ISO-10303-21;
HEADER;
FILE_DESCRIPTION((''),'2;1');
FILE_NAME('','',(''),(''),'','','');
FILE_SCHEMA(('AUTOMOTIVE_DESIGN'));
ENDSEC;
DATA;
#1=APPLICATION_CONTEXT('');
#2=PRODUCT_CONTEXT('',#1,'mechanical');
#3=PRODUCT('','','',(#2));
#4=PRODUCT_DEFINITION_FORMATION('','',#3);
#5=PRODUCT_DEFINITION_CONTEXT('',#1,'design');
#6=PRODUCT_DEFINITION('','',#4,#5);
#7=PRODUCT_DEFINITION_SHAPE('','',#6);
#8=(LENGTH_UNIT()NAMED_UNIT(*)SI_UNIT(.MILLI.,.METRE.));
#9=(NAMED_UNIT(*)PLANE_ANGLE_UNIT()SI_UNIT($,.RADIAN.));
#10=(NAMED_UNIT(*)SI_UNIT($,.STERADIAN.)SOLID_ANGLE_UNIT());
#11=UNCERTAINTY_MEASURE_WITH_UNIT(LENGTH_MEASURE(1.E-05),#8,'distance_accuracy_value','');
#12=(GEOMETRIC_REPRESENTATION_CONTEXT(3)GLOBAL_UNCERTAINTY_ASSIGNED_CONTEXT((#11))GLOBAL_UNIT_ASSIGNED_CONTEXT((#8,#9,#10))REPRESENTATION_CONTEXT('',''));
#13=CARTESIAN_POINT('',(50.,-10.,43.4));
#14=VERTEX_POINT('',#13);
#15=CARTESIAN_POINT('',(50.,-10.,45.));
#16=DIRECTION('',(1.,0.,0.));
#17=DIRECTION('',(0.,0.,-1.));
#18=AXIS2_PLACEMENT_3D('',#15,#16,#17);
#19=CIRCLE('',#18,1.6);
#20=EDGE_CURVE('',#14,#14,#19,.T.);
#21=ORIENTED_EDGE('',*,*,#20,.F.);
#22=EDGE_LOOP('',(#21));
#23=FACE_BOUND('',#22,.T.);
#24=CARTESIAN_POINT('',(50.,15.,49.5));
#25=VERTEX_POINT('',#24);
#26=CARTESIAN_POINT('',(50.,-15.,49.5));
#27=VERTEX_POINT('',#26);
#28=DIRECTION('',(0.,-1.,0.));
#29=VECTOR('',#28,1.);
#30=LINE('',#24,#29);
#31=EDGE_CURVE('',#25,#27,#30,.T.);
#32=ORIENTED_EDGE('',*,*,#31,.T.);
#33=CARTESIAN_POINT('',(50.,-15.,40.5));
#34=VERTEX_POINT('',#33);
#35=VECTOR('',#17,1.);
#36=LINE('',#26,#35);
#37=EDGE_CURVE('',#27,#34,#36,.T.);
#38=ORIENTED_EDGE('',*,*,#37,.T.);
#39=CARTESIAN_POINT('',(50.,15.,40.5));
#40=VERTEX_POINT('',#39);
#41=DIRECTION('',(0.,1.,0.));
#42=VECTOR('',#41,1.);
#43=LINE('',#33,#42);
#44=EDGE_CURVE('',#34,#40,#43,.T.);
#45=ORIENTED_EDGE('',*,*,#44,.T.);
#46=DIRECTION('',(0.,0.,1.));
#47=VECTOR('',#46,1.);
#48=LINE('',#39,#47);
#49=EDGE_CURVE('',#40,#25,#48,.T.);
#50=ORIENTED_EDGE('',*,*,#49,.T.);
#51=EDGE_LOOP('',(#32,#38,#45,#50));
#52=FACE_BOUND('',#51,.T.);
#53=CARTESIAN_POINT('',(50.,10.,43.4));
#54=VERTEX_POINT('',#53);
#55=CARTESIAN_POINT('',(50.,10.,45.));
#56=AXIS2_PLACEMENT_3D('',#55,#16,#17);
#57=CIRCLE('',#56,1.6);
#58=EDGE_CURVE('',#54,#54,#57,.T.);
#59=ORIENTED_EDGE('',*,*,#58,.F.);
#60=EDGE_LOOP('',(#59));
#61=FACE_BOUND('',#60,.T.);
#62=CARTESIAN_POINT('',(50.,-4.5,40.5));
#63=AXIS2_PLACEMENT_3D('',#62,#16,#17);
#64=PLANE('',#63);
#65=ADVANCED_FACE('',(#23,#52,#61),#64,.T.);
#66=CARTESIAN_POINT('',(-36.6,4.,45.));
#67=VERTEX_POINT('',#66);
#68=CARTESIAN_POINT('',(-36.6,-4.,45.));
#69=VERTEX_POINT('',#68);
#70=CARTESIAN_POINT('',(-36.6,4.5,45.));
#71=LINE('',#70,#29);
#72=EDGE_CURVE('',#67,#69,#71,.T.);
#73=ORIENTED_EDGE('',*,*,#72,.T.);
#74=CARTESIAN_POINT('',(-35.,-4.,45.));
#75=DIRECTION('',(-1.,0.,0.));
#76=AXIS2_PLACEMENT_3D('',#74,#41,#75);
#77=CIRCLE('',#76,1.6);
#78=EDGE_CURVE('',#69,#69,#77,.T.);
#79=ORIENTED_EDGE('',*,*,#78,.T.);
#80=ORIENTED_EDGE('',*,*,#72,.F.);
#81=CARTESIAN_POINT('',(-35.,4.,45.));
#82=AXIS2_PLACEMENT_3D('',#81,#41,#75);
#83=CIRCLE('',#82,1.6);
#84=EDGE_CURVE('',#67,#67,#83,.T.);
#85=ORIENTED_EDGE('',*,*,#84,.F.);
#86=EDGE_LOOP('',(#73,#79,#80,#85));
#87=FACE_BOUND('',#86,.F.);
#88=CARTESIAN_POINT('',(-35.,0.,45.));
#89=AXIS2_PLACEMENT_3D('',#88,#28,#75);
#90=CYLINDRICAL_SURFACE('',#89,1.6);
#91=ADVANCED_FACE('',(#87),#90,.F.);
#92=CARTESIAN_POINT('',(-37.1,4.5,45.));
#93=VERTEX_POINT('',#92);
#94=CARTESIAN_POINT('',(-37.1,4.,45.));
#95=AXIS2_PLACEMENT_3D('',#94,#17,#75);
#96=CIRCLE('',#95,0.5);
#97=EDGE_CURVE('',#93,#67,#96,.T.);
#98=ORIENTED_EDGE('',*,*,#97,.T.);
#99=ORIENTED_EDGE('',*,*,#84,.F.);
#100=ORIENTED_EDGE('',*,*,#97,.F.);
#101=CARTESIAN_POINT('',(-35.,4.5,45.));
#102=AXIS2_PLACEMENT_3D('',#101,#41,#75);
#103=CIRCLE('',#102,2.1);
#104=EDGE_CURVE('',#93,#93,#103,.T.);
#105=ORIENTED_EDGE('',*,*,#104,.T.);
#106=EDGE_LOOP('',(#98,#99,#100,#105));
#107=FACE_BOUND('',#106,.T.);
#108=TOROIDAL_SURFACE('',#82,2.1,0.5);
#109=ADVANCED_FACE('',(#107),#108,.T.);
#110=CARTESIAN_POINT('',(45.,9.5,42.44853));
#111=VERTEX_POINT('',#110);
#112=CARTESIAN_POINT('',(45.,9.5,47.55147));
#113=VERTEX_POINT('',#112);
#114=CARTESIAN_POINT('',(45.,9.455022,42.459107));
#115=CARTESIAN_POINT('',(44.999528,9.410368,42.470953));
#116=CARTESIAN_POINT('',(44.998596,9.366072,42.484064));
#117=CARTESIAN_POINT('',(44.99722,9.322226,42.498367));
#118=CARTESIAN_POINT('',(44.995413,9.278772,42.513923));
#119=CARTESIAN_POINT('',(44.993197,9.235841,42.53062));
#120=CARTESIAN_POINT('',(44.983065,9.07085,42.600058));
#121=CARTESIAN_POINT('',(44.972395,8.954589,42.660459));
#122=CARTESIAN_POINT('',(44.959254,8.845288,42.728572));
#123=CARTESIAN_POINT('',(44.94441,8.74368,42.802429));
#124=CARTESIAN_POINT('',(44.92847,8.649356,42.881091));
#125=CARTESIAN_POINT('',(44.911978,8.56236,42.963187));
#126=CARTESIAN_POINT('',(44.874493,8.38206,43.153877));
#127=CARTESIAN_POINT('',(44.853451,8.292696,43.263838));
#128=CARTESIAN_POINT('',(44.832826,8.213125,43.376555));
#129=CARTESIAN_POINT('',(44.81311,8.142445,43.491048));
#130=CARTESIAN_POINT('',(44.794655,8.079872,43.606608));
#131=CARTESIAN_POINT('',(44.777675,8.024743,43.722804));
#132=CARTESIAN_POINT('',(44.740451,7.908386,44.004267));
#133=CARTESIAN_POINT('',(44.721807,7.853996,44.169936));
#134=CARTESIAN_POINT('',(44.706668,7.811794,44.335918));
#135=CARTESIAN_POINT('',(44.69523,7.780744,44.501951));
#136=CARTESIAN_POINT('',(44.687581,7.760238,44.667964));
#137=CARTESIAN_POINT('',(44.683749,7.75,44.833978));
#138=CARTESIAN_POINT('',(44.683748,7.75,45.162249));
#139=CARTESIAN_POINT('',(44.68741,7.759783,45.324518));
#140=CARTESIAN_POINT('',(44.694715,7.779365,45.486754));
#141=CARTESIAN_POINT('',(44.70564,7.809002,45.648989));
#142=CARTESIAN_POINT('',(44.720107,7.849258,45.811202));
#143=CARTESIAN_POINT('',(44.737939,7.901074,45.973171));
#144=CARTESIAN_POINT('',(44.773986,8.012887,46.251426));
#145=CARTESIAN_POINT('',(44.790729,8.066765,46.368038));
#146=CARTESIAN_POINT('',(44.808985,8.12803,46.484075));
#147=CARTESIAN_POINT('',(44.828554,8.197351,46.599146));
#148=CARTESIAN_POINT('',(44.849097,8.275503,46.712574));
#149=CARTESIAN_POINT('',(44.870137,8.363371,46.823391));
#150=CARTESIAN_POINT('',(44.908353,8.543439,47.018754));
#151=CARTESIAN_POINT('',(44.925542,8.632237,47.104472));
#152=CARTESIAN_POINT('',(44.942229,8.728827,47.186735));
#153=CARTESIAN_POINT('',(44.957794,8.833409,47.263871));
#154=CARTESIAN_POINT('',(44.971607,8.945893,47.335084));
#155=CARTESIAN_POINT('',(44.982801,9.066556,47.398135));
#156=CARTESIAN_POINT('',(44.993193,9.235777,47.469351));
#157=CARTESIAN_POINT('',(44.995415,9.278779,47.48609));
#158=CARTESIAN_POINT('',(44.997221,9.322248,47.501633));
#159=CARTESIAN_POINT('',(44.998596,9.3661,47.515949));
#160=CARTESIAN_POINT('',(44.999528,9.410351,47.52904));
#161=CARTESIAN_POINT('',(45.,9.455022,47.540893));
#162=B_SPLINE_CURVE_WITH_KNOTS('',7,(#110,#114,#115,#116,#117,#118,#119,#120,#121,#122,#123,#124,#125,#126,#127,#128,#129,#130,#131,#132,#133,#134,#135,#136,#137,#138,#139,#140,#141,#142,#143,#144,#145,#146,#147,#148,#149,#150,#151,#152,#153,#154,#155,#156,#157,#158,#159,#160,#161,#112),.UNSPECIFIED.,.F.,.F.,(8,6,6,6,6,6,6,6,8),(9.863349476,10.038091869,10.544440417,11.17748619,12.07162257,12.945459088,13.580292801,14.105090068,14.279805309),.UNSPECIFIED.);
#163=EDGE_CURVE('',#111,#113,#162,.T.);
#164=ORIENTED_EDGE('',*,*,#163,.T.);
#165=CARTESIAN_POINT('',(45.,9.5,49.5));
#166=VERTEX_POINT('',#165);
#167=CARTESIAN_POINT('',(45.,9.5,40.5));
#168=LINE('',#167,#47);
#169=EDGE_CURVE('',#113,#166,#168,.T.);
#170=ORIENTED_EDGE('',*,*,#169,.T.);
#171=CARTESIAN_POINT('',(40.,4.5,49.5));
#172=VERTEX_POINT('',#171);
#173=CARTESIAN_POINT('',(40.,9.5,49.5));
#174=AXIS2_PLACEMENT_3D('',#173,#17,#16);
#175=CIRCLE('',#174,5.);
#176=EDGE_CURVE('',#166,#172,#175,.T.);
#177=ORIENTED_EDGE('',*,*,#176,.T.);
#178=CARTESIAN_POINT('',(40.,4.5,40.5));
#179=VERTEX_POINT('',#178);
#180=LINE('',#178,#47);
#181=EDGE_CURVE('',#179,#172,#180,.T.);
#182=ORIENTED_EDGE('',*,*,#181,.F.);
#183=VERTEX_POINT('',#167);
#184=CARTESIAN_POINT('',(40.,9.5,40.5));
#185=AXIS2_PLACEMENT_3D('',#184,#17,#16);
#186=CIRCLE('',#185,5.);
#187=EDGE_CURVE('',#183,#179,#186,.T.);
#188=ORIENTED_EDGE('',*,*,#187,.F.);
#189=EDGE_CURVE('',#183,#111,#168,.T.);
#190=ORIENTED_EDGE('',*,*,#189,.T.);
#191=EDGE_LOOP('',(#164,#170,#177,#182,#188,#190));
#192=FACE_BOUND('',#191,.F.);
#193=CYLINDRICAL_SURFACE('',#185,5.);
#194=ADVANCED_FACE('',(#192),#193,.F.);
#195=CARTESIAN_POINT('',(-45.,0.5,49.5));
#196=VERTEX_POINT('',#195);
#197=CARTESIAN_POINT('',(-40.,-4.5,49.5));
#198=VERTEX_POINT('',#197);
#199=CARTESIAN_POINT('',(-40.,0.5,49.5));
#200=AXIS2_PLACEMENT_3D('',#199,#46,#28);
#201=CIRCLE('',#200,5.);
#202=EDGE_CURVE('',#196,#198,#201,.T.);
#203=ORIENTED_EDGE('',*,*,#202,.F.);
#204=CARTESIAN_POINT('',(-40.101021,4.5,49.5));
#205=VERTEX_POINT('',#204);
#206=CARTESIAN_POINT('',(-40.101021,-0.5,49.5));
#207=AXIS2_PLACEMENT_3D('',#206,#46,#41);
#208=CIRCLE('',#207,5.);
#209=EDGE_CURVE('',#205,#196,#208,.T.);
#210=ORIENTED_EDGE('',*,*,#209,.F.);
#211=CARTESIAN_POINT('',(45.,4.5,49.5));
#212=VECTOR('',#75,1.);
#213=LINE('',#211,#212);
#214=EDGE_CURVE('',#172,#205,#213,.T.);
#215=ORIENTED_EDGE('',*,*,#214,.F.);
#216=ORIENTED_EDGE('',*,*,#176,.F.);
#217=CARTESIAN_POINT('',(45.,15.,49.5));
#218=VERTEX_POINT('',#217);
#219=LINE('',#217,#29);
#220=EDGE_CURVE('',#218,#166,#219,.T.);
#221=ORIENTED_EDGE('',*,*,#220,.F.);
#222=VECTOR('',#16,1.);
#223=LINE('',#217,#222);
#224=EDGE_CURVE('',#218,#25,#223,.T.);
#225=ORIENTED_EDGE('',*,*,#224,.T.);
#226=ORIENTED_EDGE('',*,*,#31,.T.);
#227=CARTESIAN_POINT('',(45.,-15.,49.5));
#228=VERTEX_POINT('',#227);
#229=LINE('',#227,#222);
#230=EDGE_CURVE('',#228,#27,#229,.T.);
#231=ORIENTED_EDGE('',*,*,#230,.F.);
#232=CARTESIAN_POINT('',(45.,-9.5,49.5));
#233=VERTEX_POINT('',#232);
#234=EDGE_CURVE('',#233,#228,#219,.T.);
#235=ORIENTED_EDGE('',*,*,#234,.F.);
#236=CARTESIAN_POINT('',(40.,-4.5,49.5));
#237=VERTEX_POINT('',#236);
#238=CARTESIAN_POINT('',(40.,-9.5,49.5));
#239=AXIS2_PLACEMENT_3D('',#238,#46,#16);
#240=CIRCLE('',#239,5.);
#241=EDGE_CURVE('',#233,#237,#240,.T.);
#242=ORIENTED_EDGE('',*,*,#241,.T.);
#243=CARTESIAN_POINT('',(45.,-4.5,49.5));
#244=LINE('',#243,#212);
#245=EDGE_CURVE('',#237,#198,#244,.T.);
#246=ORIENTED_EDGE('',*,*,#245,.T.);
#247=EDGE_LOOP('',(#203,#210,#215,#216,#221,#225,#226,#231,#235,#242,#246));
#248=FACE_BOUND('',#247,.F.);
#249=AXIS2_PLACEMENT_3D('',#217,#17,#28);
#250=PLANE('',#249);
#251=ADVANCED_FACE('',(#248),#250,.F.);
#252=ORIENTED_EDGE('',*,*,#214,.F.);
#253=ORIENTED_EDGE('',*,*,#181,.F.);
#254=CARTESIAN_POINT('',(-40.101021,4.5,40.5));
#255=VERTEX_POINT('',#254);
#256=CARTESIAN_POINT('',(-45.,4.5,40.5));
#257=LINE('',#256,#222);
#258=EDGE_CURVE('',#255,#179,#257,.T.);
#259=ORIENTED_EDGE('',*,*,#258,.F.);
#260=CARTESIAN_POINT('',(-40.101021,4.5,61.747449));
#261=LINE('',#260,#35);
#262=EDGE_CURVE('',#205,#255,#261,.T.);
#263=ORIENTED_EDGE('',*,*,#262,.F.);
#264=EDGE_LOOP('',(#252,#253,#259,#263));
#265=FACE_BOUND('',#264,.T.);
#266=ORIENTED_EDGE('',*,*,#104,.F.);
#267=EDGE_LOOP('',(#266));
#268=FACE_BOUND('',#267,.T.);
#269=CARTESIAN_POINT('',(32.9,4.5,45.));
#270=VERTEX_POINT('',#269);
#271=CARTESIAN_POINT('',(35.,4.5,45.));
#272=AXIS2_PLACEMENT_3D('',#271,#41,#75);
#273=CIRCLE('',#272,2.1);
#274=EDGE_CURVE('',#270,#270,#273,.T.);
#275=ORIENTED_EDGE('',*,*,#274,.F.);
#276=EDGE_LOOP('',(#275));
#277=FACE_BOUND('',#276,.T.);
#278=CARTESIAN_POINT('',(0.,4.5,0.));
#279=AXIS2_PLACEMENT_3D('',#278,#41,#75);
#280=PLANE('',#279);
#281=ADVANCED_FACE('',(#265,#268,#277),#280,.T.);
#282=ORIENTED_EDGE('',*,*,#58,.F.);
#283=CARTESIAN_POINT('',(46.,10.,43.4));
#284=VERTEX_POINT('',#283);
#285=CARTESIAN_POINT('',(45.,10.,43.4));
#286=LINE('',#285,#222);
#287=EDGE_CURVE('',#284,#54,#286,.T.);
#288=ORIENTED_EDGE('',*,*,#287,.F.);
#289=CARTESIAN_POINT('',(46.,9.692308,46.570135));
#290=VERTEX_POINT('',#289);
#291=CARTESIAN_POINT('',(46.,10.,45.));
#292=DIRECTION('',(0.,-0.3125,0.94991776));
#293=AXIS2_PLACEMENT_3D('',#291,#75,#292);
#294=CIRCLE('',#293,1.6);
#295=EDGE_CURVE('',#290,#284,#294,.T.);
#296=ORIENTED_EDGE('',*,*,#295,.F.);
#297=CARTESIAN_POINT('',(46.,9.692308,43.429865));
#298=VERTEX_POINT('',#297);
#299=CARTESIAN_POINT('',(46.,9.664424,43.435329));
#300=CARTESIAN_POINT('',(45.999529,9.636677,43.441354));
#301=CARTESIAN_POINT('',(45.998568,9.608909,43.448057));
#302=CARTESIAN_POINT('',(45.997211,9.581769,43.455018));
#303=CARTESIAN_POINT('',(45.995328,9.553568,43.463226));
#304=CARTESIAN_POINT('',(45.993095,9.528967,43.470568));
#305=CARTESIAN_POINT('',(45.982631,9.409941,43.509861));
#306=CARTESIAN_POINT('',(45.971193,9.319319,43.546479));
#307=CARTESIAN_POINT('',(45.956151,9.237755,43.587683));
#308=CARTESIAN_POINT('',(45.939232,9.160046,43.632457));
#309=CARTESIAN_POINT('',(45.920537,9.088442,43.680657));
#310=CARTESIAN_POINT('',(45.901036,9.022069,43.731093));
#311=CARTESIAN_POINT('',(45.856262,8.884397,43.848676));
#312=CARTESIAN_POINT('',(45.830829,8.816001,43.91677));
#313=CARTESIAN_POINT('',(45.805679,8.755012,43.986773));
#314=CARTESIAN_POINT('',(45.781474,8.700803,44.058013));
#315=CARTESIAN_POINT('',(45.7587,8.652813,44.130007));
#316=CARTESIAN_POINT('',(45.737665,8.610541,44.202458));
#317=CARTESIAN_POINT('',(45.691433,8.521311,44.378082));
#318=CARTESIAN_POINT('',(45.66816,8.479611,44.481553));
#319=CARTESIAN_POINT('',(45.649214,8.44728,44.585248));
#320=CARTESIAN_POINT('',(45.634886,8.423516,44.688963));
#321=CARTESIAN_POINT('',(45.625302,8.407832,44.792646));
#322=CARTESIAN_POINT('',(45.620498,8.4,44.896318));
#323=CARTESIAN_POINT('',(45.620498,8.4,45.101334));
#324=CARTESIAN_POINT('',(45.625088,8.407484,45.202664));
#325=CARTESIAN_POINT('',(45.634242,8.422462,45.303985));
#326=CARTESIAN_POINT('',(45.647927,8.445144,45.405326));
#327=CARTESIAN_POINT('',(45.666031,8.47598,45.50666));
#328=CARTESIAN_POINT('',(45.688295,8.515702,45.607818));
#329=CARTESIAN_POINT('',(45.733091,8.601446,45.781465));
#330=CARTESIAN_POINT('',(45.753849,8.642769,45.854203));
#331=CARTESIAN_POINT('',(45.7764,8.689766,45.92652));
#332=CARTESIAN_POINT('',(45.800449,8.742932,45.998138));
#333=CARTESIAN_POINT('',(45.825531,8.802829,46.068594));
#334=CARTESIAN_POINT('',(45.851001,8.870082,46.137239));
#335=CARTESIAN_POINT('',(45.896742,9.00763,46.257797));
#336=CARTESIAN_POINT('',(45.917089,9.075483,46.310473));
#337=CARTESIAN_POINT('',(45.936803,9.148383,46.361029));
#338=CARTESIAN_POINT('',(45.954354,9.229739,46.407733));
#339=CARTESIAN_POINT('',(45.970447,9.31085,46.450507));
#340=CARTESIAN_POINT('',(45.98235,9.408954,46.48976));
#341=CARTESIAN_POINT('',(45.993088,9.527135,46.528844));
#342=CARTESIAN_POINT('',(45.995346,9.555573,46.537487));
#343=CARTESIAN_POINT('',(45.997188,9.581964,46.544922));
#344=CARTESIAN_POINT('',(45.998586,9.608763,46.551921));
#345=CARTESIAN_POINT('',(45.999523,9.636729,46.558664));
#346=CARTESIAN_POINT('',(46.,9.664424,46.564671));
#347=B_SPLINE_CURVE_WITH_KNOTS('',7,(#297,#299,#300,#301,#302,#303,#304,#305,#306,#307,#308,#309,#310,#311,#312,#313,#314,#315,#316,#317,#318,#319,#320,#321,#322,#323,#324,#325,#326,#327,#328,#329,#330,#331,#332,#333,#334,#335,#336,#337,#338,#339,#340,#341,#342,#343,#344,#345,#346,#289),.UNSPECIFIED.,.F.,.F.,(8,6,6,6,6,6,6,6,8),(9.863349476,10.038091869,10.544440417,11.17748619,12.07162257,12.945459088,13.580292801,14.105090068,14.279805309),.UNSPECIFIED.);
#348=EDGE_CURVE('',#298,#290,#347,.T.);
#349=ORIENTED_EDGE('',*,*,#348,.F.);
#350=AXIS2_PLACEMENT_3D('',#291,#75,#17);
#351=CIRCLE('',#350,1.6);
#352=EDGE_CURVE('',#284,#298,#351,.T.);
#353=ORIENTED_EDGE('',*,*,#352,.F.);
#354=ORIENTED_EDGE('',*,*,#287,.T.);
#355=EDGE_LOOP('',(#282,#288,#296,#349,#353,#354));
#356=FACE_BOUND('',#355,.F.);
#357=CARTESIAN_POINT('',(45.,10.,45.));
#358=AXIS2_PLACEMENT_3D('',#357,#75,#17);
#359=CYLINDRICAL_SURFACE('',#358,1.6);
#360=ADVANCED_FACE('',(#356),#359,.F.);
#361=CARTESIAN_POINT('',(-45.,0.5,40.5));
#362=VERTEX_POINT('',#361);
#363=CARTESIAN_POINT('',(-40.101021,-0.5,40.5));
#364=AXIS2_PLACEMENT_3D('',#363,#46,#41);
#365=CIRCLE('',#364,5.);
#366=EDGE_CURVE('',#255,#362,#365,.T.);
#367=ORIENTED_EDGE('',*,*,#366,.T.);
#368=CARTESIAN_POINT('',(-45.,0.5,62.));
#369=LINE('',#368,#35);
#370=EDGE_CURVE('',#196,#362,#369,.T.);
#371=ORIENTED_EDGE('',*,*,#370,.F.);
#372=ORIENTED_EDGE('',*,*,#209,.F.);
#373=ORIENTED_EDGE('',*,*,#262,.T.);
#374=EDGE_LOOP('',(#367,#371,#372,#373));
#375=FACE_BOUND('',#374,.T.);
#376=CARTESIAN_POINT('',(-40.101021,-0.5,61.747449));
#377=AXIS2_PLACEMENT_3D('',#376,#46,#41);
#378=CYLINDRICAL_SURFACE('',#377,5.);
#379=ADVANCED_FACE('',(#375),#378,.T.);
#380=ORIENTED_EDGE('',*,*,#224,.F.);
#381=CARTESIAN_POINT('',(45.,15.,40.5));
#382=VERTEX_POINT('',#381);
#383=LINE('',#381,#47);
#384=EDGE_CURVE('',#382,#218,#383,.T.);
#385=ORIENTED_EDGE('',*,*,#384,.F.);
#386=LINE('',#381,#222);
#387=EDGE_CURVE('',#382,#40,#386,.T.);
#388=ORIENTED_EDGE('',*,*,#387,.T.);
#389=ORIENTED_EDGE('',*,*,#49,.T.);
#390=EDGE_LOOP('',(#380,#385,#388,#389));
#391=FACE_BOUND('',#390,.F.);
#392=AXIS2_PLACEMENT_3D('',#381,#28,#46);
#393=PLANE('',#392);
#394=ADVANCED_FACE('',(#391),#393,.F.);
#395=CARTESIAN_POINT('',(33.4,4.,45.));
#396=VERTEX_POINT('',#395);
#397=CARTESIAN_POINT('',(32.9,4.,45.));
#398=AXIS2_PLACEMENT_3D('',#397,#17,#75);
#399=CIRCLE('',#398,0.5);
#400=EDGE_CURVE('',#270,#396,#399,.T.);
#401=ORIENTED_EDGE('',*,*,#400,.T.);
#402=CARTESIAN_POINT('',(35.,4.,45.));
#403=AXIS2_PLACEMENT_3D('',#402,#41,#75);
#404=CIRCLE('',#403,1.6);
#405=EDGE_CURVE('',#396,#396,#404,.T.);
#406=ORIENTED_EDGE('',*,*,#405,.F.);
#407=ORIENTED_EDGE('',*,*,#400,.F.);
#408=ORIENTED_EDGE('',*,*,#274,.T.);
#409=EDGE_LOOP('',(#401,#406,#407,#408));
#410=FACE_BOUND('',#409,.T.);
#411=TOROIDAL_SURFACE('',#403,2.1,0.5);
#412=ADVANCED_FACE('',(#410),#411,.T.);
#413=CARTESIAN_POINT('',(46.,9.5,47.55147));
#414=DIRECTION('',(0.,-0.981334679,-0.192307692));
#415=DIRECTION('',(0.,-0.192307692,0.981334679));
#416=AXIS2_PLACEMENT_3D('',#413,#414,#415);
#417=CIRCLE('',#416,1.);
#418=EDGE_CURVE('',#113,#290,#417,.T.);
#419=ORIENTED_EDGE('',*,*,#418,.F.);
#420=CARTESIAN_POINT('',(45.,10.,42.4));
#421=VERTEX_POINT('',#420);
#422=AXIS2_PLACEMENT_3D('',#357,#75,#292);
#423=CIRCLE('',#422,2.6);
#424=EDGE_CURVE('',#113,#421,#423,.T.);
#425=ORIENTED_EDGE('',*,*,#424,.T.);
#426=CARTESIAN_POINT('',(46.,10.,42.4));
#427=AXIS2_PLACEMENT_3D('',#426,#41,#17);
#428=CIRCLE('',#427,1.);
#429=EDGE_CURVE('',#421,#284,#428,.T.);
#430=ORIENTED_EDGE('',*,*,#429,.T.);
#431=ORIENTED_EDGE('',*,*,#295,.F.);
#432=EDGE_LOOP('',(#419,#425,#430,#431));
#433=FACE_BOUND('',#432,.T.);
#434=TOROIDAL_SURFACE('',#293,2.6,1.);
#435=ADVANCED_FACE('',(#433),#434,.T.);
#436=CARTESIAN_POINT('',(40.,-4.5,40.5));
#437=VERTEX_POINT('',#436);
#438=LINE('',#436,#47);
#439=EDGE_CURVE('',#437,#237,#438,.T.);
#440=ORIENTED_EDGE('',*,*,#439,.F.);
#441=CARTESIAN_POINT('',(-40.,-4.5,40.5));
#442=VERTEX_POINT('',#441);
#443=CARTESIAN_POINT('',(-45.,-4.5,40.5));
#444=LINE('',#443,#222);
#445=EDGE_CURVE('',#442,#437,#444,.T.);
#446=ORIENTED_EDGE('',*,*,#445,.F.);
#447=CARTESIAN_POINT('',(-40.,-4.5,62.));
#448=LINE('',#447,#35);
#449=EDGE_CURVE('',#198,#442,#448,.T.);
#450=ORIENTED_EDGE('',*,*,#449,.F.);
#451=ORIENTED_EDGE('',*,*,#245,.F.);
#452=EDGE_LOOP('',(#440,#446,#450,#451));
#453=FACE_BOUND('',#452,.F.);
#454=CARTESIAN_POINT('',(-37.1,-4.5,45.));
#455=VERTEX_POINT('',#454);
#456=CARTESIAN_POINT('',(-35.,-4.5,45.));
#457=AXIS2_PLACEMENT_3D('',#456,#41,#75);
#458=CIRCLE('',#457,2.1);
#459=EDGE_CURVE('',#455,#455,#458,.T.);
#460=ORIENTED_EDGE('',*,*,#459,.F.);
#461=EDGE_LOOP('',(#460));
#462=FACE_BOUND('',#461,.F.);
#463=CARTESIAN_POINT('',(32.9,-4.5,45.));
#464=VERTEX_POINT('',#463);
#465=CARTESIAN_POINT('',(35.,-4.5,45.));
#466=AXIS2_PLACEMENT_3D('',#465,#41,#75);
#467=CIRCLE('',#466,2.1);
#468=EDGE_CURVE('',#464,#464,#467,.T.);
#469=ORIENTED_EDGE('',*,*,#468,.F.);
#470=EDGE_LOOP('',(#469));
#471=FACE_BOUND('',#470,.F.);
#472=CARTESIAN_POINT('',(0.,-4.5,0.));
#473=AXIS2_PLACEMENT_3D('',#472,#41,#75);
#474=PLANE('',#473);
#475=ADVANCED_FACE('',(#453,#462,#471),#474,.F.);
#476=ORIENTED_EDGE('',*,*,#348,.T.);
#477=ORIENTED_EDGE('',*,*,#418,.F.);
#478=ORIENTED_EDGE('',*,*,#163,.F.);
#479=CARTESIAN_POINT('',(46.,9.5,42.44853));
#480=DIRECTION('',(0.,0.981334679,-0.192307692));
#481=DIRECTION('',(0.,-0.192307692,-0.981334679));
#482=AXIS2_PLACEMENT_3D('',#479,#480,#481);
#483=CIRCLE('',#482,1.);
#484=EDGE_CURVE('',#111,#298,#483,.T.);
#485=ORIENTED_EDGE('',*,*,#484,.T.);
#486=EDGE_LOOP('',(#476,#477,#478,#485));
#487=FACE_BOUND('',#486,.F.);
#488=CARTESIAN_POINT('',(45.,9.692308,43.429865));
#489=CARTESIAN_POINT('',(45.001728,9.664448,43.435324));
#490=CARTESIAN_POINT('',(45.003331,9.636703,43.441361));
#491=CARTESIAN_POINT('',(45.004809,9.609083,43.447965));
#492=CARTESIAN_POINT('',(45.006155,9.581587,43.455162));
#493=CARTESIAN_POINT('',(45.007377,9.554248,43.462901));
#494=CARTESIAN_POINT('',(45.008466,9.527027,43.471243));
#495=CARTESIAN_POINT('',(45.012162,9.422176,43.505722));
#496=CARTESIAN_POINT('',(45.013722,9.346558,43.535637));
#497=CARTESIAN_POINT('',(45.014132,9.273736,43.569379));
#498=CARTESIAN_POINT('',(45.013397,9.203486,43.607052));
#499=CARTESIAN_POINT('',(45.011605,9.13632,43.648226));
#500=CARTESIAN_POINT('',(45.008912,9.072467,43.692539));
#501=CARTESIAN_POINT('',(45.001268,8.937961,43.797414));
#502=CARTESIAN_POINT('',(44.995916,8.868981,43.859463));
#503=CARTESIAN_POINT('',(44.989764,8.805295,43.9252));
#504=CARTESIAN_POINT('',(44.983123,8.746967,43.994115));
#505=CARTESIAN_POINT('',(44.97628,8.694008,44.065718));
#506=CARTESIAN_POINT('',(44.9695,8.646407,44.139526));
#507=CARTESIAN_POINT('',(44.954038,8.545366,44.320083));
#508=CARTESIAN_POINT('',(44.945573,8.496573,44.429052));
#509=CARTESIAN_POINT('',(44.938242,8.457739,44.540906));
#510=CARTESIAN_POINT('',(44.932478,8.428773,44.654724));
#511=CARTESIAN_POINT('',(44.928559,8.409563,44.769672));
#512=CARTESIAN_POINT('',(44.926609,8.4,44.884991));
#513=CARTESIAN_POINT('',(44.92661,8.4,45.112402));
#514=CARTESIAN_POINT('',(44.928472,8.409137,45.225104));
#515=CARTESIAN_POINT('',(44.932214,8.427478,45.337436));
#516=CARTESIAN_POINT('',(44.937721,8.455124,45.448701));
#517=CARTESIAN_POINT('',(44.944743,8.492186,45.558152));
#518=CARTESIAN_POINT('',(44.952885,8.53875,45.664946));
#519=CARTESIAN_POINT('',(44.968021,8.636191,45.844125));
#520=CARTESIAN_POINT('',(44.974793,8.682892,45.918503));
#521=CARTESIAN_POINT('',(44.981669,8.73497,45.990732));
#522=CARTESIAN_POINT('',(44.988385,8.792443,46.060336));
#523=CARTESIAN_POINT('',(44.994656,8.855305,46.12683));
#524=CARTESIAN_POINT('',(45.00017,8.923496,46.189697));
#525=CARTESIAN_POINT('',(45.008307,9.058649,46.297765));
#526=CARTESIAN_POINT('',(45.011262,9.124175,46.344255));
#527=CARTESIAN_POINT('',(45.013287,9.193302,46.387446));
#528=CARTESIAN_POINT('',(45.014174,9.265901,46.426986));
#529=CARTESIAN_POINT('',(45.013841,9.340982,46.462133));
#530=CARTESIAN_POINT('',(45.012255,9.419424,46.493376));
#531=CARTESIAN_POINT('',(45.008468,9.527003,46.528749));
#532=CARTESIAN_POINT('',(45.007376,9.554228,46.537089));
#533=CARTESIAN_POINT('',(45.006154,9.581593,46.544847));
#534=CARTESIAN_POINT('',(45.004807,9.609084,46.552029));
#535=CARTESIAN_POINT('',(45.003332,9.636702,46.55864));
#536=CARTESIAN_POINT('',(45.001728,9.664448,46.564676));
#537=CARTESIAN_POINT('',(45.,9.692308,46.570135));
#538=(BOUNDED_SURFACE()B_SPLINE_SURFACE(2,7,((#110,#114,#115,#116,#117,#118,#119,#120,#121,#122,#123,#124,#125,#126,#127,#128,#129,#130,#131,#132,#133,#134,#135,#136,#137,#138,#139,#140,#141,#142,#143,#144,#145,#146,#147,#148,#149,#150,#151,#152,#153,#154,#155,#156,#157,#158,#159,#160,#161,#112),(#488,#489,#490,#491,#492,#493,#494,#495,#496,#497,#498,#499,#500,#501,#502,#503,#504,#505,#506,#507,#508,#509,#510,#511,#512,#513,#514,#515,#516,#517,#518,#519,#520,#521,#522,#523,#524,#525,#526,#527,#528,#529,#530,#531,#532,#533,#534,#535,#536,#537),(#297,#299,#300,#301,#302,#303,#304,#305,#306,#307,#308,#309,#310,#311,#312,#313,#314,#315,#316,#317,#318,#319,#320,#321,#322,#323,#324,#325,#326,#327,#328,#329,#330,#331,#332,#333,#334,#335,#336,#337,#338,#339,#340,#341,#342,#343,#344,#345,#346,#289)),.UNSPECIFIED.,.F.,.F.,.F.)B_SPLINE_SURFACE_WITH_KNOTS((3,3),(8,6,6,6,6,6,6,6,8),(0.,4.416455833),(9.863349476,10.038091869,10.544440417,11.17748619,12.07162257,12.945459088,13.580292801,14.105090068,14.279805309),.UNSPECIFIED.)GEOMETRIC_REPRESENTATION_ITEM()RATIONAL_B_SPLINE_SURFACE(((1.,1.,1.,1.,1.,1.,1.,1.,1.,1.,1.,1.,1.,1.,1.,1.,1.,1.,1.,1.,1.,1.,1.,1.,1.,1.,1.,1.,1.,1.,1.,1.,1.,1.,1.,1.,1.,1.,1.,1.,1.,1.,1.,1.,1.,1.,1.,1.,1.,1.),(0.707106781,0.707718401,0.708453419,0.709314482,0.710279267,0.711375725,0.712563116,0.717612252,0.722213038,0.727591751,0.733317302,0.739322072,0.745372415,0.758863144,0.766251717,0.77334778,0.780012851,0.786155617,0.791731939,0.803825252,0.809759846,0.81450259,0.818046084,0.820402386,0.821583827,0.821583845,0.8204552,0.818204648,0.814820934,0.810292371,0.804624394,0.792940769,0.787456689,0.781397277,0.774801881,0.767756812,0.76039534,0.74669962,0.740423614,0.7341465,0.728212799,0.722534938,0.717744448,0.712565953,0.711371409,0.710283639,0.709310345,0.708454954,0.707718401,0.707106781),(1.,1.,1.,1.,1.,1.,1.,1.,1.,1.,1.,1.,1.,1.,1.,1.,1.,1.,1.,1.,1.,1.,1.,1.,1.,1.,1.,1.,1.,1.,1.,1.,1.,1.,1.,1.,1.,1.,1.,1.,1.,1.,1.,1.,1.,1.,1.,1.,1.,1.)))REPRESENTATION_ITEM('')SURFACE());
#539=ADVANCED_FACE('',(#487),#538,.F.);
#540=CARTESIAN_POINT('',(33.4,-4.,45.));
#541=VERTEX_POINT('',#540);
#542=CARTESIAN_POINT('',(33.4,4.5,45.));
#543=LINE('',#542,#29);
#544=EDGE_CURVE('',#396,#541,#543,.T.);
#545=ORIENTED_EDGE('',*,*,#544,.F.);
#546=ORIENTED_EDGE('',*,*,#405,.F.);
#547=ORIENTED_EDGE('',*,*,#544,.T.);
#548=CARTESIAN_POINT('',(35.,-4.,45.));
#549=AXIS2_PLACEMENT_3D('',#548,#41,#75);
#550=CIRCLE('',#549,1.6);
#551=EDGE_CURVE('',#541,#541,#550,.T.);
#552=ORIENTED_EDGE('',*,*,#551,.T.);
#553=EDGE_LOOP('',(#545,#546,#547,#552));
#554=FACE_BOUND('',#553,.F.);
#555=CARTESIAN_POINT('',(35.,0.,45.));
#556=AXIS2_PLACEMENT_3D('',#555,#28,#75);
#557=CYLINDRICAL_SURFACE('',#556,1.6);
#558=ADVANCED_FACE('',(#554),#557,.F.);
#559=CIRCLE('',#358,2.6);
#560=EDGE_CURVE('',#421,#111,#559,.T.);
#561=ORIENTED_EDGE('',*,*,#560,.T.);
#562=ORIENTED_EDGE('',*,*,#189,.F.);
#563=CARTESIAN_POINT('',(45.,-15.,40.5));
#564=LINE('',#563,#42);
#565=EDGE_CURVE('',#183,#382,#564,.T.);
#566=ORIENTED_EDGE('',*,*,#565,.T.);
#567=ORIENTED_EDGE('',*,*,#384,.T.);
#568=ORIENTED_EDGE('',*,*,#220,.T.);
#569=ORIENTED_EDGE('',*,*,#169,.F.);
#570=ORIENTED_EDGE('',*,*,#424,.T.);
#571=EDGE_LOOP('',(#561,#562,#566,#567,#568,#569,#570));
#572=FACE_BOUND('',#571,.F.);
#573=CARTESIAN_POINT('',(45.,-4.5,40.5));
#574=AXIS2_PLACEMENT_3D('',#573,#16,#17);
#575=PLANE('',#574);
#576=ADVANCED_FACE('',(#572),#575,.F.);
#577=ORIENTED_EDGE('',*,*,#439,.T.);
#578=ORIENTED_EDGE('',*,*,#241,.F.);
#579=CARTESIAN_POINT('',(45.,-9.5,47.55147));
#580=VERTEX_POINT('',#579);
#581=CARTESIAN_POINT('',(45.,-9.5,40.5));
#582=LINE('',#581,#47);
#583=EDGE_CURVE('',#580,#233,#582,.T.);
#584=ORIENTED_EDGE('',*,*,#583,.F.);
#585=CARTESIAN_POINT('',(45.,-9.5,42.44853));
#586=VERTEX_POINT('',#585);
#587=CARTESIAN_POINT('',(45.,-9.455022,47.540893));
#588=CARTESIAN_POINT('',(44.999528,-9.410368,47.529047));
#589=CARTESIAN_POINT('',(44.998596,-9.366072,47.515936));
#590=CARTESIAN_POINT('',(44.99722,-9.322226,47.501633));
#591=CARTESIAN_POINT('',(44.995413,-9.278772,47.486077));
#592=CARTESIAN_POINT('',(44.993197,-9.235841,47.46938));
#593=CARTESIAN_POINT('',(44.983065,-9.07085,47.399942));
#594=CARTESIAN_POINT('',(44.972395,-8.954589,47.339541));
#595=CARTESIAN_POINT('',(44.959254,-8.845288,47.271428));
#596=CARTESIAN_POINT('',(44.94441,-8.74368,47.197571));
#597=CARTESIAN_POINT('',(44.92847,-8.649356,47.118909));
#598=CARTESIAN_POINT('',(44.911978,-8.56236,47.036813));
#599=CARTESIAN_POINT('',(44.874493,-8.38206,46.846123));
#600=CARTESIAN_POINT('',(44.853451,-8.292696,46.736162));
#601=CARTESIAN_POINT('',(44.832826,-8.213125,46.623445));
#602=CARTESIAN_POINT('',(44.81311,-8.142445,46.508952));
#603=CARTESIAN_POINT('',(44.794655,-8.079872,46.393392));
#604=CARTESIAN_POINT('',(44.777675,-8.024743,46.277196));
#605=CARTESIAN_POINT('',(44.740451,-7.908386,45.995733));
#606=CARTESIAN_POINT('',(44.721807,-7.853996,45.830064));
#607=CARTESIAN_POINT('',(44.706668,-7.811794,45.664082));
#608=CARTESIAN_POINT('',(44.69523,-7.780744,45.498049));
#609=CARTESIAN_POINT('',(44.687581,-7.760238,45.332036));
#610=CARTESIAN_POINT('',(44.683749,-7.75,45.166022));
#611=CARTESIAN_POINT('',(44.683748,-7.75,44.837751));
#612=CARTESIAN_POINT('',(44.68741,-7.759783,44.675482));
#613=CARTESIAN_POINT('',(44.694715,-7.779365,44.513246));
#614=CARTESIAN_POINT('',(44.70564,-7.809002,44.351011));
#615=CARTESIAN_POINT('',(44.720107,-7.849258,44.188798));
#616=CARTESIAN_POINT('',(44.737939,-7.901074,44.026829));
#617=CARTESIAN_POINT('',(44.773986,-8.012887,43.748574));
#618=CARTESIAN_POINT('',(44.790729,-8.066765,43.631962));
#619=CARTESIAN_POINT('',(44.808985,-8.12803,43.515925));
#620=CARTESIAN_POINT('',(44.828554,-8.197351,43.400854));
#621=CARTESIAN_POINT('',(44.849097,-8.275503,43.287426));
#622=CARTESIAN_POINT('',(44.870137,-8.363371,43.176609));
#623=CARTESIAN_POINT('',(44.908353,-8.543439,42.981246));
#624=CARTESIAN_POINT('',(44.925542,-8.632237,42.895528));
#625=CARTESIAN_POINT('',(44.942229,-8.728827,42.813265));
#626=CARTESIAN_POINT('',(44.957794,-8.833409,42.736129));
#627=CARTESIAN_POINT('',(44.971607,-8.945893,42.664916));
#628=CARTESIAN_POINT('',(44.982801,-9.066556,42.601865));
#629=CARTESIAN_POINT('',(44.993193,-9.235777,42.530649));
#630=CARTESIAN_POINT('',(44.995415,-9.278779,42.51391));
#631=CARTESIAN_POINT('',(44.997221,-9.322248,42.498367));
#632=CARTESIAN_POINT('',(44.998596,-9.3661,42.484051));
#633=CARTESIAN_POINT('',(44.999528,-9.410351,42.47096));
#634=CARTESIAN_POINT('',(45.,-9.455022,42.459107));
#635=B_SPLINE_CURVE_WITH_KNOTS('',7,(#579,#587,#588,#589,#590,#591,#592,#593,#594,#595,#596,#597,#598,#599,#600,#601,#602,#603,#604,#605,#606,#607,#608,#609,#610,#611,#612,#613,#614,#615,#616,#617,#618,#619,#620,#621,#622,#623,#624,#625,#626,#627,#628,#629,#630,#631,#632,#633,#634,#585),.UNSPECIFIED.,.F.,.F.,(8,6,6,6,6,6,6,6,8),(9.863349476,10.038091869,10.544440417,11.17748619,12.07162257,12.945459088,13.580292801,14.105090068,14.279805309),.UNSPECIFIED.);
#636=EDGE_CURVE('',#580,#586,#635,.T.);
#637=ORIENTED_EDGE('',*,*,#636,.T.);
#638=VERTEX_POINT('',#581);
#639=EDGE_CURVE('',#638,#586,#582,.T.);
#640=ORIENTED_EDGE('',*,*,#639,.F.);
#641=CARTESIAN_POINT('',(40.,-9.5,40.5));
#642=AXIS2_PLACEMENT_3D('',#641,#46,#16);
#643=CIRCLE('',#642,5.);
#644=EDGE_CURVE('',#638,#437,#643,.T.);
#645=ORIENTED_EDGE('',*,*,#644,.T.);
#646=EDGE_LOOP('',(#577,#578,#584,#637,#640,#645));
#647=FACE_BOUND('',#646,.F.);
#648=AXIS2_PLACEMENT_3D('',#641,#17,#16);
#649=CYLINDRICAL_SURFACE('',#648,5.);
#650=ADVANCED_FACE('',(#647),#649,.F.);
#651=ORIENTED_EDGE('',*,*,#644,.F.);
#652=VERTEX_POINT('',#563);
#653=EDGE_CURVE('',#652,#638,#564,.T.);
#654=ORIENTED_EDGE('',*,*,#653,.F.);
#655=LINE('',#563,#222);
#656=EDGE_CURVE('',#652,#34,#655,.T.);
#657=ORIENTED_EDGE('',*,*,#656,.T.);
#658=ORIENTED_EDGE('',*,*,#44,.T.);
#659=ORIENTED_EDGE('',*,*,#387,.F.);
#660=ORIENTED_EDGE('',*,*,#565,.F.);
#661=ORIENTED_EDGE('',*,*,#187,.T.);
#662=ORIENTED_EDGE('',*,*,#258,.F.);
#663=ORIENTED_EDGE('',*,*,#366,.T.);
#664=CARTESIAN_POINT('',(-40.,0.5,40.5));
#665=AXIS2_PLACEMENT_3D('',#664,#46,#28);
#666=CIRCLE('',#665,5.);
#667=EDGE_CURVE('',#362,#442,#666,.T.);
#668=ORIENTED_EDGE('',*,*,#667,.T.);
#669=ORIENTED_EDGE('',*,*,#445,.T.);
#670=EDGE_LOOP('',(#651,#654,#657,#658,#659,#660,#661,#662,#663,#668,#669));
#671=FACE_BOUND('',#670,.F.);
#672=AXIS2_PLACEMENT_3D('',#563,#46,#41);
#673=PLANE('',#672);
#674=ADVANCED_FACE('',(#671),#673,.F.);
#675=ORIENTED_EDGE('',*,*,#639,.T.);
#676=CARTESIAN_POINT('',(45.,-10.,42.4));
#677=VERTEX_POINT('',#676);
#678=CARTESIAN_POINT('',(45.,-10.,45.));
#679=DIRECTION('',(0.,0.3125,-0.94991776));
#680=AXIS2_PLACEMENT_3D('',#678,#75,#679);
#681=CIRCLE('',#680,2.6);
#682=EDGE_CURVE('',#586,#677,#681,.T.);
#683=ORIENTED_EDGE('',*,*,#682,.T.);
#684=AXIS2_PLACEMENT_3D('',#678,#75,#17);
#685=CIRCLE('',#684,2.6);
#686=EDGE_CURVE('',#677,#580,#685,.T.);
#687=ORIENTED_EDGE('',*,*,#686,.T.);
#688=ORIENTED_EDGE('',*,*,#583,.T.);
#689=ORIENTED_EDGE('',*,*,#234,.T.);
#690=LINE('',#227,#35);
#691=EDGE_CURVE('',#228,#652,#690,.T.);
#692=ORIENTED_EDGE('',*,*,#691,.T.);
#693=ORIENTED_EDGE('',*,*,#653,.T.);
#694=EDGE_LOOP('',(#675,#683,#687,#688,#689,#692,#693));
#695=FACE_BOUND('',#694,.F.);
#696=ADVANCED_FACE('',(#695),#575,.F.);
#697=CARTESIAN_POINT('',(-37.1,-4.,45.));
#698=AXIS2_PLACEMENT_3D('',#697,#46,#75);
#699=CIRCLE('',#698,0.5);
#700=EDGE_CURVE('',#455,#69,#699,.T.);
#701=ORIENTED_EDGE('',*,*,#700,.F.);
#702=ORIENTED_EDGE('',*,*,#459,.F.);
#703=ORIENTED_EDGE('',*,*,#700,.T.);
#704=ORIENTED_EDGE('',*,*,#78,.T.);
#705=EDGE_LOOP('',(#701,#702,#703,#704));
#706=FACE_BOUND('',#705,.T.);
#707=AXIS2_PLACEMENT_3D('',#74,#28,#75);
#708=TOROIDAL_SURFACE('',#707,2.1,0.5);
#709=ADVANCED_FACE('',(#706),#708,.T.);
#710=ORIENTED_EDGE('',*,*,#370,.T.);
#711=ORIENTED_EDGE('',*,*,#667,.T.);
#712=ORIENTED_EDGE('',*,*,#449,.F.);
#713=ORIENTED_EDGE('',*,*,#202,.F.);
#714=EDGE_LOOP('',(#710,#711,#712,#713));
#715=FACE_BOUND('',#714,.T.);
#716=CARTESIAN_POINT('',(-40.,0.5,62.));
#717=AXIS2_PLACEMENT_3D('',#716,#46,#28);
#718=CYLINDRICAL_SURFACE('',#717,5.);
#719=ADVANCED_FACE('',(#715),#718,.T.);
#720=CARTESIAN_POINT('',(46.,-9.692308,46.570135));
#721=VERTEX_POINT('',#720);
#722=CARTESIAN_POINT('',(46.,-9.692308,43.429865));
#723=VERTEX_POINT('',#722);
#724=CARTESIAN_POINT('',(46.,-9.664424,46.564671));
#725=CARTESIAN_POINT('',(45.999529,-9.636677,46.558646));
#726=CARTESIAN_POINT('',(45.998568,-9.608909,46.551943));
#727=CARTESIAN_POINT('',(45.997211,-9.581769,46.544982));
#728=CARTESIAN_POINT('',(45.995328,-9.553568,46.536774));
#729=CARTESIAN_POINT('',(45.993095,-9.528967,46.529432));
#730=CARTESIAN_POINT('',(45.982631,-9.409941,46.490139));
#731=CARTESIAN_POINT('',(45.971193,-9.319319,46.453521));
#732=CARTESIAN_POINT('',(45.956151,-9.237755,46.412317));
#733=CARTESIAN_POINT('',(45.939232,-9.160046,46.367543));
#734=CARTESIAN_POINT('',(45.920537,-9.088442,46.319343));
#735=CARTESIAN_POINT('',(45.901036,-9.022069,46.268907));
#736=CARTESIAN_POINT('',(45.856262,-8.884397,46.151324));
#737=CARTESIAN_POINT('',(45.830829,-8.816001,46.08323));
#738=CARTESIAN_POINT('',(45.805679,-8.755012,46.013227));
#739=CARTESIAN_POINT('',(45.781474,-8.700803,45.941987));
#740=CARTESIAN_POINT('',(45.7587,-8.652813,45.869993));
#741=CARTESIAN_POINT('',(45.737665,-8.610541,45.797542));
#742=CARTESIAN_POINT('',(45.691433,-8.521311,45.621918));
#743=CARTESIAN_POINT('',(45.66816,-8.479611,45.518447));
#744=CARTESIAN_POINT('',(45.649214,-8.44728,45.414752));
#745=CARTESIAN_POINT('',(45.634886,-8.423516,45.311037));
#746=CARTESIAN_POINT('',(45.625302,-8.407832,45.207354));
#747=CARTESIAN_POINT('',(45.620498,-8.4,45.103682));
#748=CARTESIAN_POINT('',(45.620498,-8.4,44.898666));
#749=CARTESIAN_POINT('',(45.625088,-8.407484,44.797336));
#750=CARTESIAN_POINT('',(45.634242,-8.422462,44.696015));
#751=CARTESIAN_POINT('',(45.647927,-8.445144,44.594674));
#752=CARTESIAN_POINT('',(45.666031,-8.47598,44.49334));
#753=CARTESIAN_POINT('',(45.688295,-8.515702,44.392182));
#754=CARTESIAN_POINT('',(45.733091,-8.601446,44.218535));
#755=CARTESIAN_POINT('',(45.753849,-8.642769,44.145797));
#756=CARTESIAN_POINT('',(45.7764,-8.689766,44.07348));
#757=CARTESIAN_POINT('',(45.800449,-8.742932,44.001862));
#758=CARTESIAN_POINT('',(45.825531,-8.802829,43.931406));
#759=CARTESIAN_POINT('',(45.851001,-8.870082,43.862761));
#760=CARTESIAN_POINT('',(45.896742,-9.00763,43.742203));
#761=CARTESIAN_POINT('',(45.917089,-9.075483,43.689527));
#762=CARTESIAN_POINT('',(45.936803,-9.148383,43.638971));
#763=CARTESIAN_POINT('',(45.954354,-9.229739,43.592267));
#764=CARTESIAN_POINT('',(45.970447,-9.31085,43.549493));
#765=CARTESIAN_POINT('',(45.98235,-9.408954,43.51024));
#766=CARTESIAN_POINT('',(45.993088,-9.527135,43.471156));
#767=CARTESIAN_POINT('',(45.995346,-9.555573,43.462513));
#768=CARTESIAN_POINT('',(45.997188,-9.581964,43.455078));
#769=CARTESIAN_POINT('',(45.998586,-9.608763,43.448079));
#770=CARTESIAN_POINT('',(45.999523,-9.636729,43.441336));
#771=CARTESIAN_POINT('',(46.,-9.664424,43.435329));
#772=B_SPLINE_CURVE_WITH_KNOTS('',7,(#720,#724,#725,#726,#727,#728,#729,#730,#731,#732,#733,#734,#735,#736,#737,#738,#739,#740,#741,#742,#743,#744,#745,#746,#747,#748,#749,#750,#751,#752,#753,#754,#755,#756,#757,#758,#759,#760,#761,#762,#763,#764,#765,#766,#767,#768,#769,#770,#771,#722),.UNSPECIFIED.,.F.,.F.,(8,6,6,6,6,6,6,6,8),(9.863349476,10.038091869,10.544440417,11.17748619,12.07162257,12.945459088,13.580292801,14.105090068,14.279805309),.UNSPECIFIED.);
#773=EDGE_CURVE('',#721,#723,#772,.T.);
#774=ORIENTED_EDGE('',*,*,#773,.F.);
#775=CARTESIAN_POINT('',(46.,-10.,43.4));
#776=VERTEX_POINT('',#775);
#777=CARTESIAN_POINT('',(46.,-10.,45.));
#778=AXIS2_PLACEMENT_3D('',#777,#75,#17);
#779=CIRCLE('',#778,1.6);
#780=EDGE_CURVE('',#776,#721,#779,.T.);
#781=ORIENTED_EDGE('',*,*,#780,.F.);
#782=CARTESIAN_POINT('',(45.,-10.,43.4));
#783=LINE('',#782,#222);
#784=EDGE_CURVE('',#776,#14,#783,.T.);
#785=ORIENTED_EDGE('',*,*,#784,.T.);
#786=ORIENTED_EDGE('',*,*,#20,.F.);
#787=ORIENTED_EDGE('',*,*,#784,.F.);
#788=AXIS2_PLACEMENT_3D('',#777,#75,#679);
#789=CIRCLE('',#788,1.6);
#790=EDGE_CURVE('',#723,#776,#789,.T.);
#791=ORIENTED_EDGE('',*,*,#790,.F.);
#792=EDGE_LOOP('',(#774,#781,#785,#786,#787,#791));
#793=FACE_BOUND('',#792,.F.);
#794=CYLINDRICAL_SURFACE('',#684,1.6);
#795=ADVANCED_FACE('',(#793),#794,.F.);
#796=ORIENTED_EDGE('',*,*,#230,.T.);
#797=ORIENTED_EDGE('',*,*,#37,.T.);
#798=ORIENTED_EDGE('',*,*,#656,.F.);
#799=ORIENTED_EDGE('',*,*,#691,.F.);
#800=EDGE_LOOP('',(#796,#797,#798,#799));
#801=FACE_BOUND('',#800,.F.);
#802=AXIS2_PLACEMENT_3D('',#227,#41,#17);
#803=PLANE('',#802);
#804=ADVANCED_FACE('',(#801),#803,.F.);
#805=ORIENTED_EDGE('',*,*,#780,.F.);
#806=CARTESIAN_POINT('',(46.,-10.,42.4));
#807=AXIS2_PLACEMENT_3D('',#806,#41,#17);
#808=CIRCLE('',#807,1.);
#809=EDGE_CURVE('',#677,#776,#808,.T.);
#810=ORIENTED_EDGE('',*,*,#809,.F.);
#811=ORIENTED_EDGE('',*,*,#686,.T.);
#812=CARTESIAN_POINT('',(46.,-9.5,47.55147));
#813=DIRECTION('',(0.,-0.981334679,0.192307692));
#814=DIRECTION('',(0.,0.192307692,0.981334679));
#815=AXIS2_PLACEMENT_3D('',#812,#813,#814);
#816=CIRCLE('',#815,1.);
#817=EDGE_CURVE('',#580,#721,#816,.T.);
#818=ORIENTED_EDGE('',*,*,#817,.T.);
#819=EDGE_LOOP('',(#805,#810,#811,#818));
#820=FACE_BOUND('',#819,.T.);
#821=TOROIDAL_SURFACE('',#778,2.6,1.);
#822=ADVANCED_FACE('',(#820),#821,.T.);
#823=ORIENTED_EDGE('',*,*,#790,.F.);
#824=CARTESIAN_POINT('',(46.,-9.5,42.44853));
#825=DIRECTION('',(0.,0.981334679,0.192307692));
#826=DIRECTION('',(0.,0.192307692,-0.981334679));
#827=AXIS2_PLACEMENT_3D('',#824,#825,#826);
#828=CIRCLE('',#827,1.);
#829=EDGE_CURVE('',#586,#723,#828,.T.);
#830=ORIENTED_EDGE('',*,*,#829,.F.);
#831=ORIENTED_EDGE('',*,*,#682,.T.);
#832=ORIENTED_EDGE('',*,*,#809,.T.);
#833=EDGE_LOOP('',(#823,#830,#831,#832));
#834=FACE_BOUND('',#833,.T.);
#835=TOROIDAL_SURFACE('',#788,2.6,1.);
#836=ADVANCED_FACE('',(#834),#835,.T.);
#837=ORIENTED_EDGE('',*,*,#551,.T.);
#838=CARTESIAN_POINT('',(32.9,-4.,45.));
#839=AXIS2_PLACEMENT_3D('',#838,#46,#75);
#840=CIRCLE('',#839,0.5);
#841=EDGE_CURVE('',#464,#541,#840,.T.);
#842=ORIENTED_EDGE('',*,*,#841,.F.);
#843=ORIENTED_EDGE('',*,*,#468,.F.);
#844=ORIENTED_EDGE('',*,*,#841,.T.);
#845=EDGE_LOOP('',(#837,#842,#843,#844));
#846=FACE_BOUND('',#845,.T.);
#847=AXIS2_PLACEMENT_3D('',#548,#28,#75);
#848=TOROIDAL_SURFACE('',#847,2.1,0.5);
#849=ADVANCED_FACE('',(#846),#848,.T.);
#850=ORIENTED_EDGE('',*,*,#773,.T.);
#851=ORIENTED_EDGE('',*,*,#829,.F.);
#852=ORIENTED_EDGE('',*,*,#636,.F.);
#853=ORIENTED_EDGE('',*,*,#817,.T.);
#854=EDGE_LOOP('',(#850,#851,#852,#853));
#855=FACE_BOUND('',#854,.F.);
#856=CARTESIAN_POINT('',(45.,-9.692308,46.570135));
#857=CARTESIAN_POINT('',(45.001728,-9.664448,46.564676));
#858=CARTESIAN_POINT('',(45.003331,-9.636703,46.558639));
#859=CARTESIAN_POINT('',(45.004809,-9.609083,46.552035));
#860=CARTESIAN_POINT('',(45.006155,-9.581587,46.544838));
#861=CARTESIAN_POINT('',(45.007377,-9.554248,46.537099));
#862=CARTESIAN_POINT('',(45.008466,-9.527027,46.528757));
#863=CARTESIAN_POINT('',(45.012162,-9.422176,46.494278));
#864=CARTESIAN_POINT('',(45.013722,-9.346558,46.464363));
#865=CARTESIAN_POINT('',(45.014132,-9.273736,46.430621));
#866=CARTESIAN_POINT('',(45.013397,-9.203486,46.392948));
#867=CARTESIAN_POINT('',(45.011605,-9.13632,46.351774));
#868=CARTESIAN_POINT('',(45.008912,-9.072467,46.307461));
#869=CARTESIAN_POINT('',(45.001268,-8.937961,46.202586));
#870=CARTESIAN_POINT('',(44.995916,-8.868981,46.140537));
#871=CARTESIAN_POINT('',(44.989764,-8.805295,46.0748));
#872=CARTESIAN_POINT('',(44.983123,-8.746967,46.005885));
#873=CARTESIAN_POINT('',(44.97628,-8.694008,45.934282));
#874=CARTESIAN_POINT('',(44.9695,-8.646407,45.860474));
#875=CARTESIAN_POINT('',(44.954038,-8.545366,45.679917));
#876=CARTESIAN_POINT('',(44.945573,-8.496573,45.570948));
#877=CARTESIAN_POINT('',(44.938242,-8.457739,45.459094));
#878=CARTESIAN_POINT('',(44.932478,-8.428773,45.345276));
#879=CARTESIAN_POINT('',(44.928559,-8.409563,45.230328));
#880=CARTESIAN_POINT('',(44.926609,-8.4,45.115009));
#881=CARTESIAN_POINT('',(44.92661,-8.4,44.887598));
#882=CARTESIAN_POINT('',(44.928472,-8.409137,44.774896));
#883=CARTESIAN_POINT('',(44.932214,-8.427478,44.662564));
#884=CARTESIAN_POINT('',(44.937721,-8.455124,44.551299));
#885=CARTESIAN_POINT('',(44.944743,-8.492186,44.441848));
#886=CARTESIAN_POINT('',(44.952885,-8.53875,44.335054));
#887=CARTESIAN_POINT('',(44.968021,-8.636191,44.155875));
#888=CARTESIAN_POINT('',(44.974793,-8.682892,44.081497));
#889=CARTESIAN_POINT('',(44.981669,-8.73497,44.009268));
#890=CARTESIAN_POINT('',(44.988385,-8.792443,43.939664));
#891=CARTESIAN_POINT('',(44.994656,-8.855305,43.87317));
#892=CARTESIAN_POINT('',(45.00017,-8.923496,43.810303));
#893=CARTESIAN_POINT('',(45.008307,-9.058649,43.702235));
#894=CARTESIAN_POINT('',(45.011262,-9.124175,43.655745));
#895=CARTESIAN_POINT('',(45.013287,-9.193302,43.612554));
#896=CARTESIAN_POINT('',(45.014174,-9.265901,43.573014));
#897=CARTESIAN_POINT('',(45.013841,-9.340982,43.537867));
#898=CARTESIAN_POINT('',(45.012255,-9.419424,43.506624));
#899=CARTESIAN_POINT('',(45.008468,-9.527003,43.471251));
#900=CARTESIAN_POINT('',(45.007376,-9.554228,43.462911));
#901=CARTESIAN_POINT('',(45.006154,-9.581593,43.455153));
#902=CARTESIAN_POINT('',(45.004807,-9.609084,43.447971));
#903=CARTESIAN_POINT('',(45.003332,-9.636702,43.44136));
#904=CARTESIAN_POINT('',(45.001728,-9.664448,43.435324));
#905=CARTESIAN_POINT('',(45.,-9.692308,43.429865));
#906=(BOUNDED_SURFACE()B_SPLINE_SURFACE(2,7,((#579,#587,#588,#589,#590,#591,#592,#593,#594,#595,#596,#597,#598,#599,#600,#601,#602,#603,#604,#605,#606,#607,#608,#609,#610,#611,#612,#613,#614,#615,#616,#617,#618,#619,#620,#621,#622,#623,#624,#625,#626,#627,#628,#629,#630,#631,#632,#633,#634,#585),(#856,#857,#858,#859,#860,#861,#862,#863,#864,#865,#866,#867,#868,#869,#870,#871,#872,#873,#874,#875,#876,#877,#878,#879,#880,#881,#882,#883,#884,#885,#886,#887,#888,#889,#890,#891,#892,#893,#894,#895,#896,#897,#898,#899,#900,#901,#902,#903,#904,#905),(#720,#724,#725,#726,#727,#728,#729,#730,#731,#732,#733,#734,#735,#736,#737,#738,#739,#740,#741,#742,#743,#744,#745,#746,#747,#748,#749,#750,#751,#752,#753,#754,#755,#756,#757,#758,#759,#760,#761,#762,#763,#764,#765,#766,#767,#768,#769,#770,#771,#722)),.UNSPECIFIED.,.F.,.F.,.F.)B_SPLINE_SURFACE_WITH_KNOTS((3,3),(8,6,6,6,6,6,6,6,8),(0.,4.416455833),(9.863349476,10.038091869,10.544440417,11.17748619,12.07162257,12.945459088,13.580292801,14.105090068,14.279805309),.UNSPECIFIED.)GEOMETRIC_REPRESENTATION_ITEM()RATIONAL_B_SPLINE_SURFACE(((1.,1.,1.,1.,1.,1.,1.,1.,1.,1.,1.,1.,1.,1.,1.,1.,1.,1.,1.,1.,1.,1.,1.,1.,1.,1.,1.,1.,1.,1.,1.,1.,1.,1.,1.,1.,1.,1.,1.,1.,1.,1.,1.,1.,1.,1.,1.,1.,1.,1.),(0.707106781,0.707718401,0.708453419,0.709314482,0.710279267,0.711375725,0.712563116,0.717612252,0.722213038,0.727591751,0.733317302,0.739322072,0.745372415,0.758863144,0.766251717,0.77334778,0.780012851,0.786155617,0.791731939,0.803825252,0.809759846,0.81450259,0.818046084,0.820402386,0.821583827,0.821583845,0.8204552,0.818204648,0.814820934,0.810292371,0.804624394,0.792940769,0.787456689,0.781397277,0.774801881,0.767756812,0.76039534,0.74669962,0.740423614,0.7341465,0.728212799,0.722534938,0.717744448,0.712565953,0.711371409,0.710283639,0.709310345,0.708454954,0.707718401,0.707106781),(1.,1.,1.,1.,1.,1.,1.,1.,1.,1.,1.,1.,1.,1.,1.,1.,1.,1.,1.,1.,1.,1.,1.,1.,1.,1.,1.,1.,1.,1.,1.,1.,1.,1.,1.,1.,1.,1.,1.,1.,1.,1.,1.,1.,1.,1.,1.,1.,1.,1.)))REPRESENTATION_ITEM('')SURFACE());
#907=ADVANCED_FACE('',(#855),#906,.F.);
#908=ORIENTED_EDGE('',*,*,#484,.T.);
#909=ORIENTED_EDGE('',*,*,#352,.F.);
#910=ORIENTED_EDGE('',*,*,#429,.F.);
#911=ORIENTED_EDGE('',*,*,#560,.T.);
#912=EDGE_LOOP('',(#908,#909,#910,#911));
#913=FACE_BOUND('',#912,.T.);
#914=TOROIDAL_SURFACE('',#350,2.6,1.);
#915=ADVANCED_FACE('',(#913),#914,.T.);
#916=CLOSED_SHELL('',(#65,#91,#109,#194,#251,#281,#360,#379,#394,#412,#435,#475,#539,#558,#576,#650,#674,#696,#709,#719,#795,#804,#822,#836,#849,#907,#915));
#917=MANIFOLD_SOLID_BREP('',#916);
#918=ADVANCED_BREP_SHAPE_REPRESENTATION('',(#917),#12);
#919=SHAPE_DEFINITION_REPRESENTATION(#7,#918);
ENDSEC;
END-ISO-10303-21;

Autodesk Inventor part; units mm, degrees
ref_plane "YZ Plane" through (0, 0, 0) normal (1, 0, 0) x (0, 1, 0)
ref_plane "XZ Plane" through (0, 0, 0) normal (0, 1, 0) x (-1, 0, 0)
ref_plane "XY Plane" through (0, 0, 0) normal (0, 0, 1) x (1, 0, 0)
sketch "Sketch1" plane through (0, 0, 0) normal (0, 1, 0) x (-1, 0, 0)
  line L0 (-35, 45) -> (35, 45) construction
  line L1 (35, 45) -> (35, -45) construction
  line L2 (35, -45) -> (-35, -45) construction
  line L3 (-35, -45) -> (-35, 45) construction
  line L4 (-35, 45) -> (35, -45) construction
  line L5 (35, 45) -> (-35, -45) construction
  circle A0 centre (35, 45) radius 1.6
  circle A1 centre (35, -45) radius 1.6 construction
  circle A2 centre (-35, -45) radius 1.6 construction
  circle A3 centre (-35, 45) radius 1.6
  line L6 (-45, 49.5) -> (45, 49.5)
  line L7 (45, 49.5) -> (45, 40.5)
  line L8 (45, 40.5) -> (-45, 40.5)
  line L9 (-45, 40.5) -> (-45, 49.5)
  line L10 (-45, 49.5) -> (45, 40.5) construction
  line L11 (45, 49.5) -> (-45, 40.5) construction
  point P0 (0, 0)
  point P1 (0, 45)
  dimension "d0" = 70
  dimension "d1" = 90
  dimension "d2" = 3.2
  dimension "d3" = 3.2
  dimension "d4" = 3.2
  dimension "d5" = 3.2
  dimension "d6" = 90
  dimension "d7" = 9
extrude "Extrusion1" add sketch "Sketch1" along normal mid plane 9
sketch "Sketch2" plane through (45, -4.5, 40.5) normal (1, 0, 0) x (0, 0, -1)
  line L0 (0, 0) -> (-9, 0) construction
  line L1 (0, 0) -> (-9, 0) construction
  line L2 (-9, 0) -> (-9, 9) construction
  line L3 (-9, 9) -> (0, 9) construction
  line L4 (0, 9) -> (0, 0) construction
  line L5 (-9, 0) -> (-9, 9) construction
  line L6 (-9, 0) -> (0, 9) construction
  line L7 (-9, 9) -> (0, 9) construction
  line L8 (-9, 9) -> (0, 0) construction
  line L9 (-9, -10.5) -> (0, -10.5)
  line L10 (0, -10.5) -> (0, 19.5)
  line L11 (0, 19.5) -> (-9, 19.5)
  line L12 (-9, 19.5) -> (-9, -10.5)
  line L13 (-9, -10.5) -> (0, 19.5) construction
  line L14 (0, -10.5) -> (-9, 19.5) construction
  line L15 (-4.5, 4.5) -> (-4.5, 14.5) construction
  line L16 (-4.5, 4.5) -> (-4.5, -5.5) construction
  circle A0 centre (-4.5, 14.5) radius 1.6
  circle A1 centre (-4.5, -5.5) radius 1.6
  point P0 (40.5, 4.5)
  dimension "d10" = 9
  dimension "d11" = 30
  dimension "d12" = 10
  dimension "d13" = 10
  dimension "d14" = 3.2
  dimension "d15" = 3.2
extrude "Extrusion2" add sketch "Sketch2" along normal blind 5
fillet "Fillet1" radius 5 2 edges at (45, -4.5, 45) (45, 4.5, 45)
fillet "Fillet2" radius 5 2 edges at (-45, -4.5, 45) (-45, 4.5, 45)
fillet "Fillet3" radius 1 6 edges at (44.8775, 8.4, 45) (45, 9.7468, 43.4202) (45, 11.5798, 45.2532) (44.8775, -8.4, 45) (45, -11.5798, 45.2532) (45, -9.7468, 43.4202)
fillet "Fillet4" radius 0.5 4 edges at (36.6, -4.5, 45) (-33.4, -4.5, 45) (-33.4, 4.5, 45) (36.6, 4.5, 45)
equation "\"d3\" = d2"
equation "\"d4\" = d2"
equation "\"d5\" = d2"
properties part number "PCB_STAND"
